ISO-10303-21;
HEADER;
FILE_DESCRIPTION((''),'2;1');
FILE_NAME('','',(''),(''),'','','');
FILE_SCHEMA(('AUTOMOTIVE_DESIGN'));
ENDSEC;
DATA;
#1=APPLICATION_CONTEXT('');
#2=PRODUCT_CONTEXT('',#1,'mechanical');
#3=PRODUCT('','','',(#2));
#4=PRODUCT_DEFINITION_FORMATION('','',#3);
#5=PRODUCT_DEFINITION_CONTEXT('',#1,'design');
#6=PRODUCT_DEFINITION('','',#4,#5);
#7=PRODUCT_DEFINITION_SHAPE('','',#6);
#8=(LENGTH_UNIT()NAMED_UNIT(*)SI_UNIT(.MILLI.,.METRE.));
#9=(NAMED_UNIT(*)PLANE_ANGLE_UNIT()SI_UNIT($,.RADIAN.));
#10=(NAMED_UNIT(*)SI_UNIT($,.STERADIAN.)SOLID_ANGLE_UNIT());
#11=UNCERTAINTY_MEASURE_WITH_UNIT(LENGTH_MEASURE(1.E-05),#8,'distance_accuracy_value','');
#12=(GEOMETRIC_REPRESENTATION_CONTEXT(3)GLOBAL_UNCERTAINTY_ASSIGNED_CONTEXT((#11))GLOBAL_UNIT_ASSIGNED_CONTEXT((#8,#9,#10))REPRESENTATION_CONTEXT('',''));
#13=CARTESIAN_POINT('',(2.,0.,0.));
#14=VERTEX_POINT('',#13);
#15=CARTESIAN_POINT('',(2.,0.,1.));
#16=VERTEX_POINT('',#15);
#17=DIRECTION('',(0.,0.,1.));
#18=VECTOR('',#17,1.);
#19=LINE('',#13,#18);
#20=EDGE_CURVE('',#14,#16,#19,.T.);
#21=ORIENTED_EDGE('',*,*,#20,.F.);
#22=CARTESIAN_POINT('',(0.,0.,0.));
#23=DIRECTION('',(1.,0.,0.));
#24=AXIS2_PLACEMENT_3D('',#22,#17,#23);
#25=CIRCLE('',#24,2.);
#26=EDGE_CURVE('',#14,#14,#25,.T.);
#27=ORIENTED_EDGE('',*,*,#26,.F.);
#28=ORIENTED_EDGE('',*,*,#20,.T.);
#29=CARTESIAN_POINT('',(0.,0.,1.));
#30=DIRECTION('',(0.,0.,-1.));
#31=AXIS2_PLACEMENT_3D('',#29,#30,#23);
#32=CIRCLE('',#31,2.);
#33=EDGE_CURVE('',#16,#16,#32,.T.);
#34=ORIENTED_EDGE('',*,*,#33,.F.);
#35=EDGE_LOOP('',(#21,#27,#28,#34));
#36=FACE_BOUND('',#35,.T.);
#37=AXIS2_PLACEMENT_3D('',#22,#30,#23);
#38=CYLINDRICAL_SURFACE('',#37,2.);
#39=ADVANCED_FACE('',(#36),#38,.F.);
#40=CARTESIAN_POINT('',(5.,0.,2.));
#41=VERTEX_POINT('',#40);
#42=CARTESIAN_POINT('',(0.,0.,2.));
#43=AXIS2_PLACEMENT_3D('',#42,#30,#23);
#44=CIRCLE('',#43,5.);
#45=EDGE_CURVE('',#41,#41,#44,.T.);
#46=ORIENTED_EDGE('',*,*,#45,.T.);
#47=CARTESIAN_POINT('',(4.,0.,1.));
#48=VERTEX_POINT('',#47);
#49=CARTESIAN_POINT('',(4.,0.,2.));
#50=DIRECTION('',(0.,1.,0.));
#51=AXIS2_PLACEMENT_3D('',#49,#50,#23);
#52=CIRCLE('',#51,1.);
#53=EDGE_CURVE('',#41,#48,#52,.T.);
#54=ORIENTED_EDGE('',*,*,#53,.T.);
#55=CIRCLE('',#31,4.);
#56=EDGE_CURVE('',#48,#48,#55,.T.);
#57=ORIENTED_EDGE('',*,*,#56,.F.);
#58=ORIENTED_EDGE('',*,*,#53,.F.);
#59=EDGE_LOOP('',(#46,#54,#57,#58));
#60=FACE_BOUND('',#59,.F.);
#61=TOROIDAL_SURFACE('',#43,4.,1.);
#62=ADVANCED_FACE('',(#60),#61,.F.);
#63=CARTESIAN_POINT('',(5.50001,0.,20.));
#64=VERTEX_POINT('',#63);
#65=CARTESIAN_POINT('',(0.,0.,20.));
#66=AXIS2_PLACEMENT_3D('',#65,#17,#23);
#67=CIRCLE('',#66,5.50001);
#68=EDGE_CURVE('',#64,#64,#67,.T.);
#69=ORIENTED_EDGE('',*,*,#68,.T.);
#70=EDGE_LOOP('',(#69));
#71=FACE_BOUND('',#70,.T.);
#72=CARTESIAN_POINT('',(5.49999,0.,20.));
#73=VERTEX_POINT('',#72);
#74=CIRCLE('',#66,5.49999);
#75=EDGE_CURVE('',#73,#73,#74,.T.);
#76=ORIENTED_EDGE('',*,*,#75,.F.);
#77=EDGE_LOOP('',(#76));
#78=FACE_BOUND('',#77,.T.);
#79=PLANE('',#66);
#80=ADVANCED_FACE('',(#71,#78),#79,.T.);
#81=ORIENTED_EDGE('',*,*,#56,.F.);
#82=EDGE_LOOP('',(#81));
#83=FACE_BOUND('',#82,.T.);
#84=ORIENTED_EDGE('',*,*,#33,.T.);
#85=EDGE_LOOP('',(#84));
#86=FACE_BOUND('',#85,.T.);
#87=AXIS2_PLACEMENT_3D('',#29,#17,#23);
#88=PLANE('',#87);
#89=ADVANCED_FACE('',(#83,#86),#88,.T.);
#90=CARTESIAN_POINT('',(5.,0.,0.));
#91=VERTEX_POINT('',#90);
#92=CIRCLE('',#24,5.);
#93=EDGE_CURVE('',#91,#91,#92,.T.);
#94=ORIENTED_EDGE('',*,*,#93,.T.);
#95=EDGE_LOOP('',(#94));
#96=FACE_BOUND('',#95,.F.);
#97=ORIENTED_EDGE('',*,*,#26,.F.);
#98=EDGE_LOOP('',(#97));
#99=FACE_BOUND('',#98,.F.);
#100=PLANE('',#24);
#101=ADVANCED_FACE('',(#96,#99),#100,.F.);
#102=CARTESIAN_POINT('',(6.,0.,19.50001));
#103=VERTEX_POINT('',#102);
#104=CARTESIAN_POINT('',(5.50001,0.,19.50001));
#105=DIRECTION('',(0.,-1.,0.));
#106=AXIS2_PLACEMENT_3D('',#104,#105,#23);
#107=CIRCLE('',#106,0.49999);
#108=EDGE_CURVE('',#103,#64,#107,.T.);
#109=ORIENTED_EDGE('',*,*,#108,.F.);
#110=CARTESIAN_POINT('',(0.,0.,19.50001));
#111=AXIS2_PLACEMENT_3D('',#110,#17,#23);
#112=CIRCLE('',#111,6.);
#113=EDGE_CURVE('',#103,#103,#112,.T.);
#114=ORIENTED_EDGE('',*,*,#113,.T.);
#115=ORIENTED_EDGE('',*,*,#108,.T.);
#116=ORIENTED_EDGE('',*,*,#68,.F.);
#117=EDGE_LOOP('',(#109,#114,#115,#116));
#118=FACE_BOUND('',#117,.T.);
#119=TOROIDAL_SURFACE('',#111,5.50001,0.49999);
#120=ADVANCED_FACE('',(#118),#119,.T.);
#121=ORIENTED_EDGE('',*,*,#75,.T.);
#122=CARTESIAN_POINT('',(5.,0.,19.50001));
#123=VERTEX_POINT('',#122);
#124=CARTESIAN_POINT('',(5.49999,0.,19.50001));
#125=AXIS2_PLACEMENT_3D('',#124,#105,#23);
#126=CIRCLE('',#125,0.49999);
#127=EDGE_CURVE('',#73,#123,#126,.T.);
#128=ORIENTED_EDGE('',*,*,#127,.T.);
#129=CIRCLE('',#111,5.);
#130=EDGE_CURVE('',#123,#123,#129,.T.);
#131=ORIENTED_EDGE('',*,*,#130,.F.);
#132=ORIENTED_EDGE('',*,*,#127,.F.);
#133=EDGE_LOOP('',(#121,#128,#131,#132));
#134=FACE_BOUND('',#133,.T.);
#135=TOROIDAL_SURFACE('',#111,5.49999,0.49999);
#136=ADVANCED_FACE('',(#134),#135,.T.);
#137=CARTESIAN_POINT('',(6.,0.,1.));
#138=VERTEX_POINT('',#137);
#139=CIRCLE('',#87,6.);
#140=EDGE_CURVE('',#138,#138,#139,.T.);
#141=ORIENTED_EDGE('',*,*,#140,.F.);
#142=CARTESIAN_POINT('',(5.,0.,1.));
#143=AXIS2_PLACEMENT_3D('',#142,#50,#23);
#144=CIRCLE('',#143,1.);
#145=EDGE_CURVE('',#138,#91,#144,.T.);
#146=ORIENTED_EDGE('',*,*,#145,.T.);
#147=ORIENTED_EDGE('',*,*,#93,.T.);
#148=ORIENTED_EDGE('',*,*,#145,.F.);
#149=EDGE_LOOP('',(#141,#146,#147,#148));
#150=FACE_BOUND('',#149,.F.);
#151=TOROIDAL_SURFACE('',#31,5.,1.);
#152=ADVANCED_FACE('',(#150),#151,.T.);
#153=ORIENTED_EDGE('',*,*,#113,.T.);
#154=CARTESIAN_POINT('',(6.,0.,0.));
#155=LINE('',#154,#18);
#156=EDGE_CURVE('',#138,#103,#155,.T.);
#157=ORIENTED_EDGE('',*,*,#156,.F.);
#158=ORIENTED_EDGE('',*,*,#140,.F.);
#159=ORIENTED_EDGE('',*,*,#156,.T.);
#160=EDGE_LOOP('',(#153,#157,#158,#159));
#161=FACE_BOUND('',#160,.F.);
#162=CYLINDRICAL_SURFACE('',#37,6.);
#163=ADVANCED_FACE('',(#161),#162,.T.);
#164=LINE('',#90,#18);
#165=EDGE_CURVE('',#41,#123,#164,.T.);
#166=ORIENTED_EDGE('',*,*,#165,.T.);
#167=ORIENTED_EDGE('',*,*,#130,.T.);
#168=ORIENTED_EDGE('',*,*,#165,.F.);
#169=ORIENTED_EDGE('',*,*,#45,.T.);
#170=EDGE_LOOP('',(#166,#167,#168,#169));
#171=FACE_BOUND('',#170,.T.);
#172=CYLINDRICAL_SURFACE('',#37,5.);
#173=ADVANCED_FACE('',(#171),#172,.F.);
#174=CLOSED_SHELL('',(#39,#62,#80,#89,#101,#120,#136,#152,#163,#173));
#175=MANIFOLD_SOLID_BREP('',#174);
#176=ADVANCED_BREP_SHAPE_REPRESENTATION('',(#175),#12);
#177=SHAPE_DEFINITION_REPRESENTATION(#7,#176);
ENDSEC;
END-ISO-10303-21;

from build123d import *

# Parameters (mm, degrees)
F0_R     = 6
F0_R_2   = 2
F1_DEPTH = 20
F2_T     = -1
F3_DEPTH = 25
F4_R     = 1
F5_R     = 0.49999


# Not quite as in the source:
# - a fillet or chamfer is up to 0.001 mm smaller than in the source, because OpenCascade refuses the exact size


with BuildPart() as f1:
    # F0 (on Top) → F1 (new body)
    with BuildSketch(Plane.XY):
        Circle(F0_R)
        Circle(F0_R_2, mode=Mode.SUBTRACT)
        Circle(F0_R_2)
    extrude(amount=F1_DEPTH)

    # F2
    f2_openings = [f1.faces().sort_by_distance(p)[0] for p in [
        (0, 0, 20),
    ]]
    offset(amount=F2_T, openings=f2_openings)

    # F0 (on Top) → F3 (cut)
    with BuildSketch(Plane.XY):
        Circle(F0_R_2)
    extrude(amount=F3_DEPTH, mode=Mode.SUBTRACT)

    # F4
    f4_edges = [f1.edges().sort_by_distance(p)[0] for p in [
        (-6, 0, 0),
        (-5, 0, 1),
    ]]
    fillet(f4_edges, radius=F4_R)

    # F5 (radius 0.5 in the source; OpenCascade refuses exactly that, so slightly less here)
    f5_edges = [f1.edges().sort_by_distance(p)[0] for p in [
        (-5, 0, 20),
        (-6, 0, 20),
    ]]
    fillet(f5_edges, radius=F5_R)


solid = f1.part
